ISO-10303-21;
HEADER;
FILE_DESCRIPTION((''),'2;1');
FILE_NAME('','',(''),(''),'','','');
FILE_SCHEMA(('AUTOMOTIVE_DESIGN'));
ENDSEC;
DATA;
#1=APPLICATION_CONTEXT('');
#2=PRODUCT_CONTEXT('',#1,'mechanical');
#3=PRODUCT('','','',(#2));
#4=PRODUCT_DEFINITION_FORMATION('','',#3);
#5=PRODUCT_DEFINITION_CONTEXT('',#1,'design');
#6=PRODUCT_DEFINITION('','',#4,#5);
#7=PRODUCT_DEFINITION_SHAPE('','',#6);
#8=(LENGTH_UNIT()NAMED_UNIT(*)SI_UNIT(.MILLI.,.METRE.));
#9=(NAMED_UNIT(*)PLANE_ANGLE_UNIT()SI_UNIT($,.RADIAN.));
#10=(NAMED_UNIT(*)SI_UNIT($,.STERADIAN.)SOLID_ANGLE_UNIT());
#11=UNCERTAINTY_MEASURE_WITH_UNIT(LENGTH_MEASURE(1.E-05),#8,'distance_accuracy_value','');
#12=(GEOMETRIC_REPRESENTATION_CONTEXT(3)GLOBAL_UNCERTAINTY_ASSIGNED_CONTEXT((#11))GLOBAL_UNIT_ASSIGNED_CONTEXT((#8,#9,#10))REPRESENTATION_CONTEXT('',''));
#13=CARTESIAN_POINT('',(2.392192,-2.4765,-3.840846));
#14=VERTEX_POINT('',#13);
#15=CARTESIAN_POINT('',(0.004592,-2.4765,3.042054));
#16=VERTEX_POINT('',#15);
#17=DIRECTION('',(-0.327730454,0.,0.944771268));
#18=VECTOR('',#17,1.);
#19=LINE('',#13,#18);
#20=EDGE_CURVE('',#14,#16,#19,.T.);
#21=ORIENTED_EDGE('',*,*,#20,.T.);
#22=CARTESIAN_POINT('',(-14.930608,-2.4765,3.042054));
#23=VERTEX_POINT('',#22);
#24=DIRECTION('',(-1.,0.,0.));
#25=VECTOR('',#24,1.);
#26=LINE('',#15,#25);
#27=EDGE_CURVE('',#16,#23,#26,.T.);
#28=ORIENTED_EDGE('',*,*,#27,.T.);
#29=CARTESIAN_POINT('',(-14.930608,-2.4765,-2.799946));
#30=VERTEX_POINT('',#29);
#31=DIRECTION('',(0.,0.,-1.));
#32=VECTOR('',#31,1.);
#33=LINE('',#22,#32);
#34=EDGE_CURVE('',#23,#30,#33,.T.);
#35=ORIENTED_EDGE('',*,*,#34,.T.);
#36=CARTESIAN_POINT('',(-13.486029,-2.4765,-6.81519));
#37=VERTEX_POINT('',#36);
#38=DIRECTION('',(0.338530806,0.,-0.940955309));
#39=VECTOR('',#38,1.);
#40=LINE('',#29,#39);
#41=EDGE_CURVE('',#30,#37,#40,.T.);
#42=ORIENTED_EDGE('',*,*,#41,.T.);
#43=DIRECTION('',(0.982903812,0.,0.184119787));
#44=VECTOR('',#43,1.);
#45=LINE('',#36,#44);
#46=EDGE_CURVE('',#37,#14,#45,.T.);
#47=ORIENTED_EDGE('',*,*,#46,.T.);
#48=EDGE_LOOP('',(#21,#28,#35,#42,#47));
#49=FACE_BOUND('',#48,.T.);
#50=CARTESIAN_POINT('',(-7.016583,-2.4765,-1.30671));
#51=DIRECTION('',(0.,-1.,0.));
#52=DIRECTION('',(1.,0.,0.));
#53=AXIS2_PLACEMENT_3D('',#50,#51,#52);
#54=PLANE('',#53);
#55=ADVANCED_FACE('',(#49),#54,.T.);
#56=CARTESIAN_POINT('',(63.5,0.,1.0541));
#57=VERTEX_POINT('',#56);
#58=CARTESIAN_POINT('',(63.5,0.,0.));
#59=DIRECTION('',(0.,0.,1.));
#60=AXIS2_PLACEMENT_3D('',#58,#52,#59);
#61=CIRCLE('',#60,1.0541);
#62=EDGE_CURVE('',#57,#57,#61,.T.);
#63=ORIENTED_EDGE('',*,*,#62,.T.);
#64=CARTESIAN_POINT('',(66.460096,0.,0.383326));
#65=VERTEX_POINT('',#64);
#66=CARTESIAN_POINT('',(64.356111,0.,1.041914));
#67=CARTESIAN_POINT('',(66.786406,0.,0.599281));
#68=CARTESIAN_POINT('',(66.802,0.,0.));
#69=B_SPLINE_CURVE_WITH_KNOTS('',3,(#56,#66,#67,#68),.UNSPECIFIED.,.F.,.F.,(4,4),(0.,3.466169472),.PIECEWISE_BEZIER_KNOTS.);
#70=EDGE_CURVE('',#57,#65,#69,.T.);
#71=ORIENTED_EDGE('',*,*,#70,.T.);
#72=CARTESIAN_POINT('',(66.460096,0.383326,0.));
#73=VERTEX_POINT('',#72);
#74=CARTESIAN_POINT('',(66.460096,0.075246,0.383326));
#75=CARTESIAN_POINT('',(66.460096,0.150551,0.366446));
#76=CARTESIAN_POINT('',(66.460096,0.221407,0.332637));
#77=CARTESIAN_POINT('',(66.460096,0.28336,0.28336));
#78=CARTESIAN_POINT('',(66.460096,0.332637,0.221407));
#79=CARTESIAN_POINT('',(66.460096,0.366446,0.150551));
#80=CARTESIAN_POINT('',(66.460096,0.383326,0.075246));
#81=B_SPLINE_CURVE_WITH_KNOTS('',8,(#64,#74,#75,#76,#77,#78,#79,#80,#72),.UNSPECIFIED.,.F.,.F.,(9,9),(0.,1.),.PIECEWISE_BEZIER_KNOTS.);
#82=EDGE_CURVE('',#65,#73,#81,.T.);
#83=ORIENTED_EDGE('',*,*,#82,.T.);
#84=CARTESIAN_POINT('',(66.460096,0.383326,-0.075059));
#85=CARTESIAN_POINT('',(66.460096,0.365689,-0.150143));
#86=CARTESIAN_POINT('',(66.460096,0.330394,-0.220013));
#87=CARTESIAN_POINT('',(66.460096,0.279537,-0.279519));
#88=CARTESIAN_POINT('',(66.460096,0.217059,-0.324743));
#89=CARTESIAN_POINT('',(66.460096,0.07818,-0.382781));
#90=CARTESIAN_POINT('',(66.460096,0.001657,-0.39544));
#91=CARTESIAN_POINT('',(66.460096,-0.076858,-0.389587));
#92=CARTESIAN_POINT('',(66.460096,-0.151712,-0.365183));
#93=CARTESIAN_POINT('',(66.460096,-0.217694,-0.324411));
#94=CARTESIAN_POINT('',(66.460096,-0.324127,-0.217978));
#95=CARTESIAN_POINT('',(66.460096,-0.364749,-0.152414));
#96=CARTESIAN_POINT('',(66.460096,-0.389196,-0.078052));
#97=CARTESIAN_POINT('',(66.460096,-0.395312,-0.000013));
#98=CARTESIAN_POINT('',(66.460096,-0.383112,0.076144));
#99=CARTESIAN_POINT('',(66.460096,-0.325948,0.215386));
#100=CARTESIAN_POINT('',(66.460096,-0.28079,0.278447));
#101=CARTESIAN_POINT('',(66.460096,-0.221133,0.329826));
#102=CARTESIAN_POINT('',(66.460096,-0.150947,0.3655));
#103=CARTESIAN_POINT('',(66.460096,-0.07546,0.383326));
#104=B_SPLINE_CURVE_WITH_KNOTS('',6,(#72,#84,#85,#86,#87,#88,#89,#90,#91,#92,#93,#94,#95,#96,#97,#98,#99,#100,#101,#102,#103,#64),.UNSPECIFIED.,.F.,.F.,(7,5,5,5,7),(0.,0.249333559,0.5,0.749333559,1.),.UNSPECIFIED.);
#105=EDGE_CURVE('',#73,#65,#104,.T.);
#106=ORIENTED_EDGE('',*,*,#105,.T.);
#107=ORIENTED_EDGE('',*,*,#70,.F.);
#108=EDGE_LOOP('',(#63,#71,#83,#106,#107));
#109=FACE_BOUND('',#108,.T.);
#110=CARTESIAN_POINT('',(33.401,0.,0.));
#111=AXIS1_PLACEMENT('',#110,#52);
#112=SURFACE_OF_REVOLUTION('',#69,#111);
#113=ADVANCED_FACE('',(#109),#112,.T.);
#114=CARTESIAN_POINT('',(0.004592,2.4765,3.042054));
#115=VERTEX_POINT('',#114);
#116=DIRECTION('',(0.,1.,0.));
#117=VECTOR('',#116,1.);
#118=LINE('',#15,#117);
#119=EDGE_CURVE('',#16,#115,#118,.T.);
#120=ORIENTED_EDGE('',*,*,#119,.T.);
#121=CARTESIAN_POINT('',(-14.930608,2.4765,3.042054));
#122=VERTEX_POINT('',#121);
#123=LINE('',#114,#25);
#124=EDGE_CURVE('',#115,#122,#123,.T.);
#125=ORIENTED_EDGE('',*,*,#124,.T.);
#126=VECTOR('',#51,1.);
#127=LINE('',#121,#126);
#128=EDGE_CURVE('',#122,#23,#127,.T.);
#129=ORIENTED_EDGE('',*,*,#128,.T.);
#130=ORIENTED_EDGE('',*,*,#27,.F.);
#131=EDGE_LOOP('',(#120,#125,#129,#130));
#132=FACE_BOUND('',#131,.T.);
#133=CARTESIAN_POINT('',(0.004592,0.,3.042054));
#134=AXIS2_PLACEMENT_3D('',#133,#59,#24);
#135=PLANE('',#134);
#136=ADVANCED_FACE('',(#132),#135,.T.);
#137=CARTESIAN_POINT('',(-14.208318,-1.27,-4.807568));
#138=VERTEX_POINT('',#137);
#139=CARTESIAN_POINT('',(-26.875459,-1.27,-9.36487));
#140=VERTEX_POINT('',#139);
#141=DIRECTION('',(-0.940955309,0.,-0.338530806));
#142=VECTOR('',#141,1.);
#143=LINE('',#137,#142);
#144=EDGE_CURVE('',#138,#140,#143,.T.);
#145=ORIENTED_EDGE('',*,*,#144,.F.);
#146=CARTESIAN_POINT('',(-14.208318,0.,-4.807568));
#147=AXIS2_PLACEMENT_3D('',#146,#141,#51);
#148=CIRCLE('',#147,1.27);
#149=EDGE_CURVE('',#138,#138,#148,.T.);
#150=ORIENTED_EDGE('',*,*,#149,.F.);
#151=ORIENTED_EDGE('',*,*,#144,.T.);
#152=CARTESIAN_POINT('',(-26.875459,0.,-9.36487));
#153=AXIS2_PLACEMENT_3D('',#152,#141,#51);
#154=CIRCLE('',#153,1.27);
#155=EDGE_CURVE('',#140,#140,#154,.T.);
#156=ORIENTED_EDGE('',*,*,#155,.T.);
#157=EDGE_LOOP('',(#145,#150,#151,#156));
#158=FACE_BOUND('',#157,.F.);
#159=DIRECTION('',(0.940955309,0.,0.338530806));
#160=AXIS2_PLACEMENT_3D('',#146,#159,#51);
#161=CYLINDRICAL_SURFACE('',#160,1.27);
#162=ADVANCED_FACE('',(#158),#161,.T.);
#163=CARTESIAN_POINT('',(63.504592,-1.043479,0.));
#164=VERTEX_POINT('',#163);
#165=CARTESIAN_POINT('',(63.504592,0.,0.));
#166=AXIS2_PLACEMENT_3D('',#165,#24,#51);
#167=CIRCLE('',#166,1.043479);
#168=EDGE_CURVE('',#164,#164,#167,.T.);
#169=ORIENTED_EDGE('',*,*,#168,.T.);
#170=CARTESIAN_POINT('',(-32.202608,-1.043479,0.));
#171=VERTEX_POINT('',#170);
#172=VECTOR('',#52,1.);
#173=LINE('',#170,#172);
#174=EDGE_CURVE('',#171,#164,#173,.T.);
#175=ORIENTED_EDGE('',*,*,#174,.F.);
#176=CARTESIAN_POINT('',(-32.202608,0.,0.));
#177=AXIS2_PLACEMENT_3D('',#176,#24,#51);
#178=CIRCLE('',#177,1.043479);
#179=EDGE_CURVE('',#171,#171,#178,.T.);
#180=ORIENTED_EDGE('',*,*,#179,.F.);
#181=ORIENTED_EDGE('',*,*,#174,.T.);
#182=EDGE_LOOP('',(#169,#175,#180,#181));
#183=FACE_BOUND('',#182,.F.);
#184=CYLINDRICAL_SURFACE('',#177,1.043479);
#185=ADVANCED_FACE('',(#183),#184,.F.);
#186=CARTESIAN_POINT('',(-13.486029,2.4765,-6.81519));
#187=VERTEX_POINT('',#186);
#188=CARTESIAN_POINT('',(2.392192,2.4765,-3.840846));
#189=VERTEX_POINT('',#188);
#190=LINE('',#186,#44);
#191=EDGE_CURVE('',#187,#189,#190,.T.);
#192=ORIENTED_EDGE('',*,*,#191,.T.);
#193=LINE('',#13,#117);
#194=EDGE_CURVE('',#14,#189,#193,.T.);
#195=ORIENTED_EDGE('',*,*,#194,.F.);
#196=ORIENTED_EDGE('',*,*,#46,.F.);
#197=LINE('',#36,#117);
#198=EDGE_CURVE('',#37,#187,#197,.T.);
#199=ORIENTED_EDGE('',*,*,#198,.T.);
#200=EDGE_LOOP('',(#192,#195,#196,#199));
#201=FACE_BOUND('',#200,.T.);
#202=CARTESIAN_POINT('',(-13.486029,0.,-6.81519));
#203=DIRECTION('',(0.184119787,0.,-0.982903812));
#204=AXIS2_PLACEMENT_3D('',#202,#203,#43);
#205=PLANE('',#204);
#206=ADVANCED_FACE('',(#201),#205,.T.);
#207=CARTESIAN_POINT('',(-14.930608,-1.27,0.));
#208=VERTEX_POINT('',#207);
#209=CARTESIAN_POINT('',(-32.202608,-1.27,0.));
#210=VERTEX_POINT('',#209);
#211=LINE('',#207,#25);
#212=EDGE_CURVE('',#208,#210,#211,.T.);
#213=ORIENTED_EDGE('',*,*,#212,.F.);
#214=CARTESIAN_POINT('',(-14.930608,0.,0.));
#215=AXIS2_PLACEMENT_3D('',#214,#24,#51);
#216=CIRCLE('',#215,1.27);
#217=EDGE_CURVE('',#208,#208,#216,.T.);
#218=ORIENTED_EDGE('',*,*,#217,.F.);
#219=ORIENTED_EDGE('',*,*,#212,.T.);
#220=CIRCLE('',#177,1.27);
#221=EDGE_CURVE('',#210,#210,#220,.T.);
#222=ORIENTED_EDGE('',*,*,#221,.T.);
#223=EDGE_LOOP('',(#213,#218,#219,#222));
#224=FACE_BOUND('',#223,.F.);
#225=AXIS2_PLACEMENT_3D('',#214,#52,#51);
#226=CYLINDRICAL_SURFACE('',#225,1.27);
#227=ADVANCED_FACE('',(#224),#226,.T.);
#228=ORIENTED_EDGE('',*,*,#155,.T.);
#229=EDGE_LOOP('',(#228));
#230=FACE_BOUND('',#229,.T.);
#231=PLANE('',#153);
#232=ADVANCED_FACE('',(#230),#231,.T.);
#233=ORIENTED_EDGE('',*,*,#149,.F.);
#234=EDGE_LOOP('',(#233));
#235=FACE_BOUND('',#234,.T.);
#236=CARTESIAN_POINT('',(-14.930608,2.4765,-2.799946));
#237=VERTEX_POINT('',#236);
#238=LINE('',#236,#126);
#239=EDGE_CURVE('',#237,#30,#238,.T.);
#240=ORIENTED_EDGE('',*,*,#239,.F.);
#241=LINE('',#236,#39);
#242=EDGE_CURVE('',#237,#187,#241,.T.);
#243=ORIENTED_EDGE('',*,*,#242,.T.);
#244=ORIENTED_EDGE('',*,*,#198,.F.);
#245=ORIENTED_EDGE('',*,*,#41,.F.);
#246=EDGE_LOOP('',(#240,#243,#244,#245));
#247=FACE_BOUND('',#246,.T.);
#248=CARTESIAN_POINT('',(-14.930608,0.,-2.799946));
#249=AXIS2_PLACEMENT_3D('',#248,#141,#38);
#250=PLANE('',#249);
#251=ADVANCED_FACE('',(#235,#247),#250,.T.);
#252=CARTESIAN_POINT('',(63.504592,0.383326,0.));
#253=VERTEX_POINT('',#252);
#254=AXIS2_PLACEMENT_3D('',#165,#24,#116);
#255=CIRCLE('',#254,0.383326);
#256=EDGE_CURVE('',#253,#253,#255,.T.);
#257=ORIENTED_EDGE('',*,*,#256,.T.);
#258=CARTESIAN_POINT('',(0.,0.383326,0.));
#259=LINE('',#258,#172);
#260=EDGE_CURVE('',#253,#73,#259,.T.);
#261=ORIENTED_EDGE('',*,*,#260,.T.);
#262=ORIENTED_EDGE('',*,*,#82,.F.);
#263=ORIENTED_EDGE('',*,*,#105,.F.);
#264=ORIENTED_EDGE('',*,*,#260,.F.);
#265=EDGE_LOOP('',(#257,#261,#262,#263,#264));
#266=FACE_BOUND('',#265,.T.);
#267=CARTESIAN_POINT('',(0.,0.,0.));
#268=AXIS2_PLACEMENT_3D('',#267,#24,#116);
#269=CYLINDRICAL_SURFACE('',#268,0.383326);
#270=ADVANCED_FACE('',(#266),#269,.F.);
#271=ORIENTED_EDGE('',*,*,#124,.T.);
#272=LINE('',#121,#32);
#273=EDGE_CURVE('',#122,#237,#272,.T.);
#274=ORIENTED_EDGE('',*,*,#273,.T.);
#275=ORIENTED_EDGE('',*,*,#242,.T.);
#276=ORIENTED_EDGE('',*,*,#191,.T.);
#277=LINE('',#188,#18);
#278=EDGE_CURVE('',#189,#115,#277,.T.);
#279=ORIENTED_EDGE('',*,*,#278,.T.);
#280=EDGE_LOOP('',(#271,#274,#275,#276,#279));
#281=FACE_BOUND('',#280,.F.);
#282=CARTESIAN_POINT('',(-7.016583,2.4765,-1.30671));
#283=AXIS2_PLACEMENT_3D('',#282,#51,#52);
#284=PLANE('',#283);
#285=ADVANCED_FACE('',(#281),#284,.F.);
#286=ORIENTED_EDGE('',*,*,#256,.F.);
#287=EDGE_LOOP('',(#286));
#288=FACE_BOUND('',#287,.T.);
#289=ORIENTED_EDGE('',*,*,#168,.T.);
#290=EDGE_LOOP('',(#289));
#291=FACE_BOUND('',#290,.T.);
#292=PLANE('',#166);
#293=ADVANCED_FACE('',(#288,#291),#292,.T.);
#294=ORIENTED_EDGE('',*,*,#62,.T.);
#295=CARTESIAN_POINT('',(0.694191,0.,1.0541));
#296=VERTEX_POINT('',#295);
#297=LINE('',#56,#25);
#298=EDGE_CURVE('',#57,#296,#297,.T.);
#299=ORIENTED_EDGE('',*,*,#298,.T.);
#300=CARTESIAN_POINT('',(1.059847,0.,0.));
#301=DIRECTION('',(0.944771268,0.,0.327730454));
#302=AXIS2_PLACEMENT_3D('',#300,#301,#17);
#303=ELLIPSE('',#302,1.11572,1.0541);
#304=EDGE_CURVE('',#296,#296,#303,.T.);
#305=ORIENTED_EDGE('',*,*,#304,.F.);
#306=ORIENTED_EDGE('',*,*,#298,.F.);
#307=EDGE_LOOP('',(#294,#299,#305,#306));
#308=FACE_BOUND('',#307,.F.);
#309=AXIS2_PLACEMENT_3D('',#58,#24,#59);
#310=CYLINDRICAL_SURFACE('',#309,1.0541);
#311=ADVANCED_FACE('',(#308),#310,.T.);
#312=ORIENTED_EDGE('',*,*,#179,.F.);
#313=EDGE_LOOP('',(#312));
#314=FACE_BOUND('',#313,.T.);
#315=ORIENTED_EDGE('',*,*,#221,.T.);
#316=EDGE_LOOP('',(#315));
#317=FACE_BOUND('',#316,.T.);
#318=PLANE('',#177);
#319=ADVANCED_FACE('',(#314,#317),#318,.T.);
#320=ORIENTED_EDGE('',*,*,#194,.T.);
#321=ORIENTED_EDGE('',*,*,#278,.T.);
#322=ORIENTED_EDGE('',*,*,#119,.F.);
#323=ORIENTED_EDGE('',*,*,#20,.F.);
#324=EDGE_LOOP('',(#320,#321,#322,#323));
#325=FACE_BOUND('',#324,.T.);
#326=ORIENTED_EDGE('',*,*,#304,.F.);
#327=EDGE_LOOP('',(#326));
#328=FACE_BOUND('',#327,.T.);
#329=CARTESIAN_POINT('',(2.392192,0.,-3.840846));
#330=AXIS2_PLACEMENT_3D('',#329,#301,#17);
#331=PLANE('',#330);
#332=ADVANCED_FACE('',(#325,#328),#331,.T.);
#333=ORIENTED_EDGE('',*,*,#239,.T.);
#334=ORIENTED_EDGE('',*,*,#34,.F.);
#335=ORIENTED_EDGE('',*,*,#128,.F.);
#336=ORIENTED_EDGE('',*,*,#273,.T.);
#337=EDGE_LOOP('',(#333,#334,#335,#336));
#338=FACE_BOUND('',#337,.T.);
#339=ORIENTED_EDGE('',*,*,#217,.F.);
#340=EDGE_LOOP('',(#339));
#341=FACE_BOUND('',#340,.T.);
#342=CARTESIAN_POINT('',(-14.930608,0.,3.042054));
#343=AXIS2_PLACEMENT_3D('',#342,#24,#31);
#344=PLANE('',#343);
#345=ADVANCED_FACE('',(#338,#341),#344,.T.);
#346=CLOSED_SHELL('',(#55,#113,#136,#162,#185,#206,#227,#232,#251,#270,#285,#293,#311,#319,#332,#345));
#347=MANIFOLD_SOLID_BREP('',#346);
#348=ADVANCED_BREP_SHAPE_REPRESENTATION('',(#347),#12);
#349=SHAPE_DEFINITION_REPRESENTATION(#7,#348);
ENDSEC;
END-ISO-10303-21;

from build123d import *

# Parameters (mm, degrees)
F3_DEPTH       = 2.4765
F4_R           = 1.27
F5_DEPTH       = 17.272
F6_R           = 1.27
F7_DEPTH       = 13.462
F8_R           = 1.0434793425
F9_DEPTH       = 95.7072
F9_DEPTH_BACK  = 132
F10_R          = 0.3833262894
F11_DEPTH      = 32.2036075046
F11_DEPTH_BACK = 66.8030001


# Not quite as in the source:
# - an extrude ends at something that could not be found from the text; its depth is read off the source's solid


with BuildPart() as f1:
    # F0 (on Front) → F1 (revolve)
    with BuildSketch(Plane.XZ):
        with BuildLine():
            Line((63.5, 1.0541), (0, 1.0541))
            Line((0, 1.0541), (0, 0))
            Line((0, 0), (66.802, 0))
            add(Edge.make_bspline(
                [(63.5, 1.0541), (64.35611099, 1.0419137543), (66.7864059348, 0.5992812803), (66.802, 0)],
                knots=[0, 0, 0, 0, 3.4661694722, 3.4661694722, 3.4661694722, 3.4661694722], degree=3))
        make_face()
    revolve(axis=Axis((33.401, 0, 0), (1, 0, 0)))

    # F2 (on Front) → F3 (join, symmetric)
    with BuildSketch(Plane.XZ):
        Polygon((0.0045924954, 3.0420540417), (-14.9306075046, 3.0420540417), (-14.9306075046, -2.7999459583), (-13.4860288486, -6.8151904523), (2.3921924954, -3.8408457662), align=None)
    extrude(amount=F3_DEPTH, both=True)

    # F4 (on face) → F5 (join)
    with BuildSketch(Plane(origin=(-14.9306075046, 0, 0), x_dir=(0, -1, 0), z_dir=(-1, 0, 0))):
        Circle(F4_R)
    extrude(amount=F5_DEPTH)

    # F6 (on face) → F7 (join)
    with BuildSketch(Plane(origin=(-14.1114148908, 0, -5.0769134453), x_dir=(0, -1, 0), z_dir=(-0.9409553089, 0, -0.3385308062))):
        with Locations((0, 0.2862465809)):
            Circle(F6_R)
    extrude(amount=F7_DEPTH)

    # F8 (on face) → F9 (cut, two sides)
    with BuildSketch(Plane(origin=(-32.2026075046, 0, 0), x_dir=(0, -1, 0), z_dir=(-1, 0, 0))) as f9_sk:
        Circle(F8_R)
    extrude(amount=-F9_DEPTH, mode=Mode.SUBTRACT)
    extrude(f9_sk.sketch, amount=F9_DEPTH_BACK, mode=Mode.SUBTRACT)

    # F10 (on Right) → F11 (cut, two sides)
    with BuildSketch(Plane.YZ) as f11_sk:
        Circle(F10_R)
    extrude(amount=-F11_DEPTH, mode=Mode.SUBTRACT)
    extrude(f11_sk.sketch, amount=F11_DEPTH_BACK, mode=Mode.SUBTRACT)


solid = f1.part
